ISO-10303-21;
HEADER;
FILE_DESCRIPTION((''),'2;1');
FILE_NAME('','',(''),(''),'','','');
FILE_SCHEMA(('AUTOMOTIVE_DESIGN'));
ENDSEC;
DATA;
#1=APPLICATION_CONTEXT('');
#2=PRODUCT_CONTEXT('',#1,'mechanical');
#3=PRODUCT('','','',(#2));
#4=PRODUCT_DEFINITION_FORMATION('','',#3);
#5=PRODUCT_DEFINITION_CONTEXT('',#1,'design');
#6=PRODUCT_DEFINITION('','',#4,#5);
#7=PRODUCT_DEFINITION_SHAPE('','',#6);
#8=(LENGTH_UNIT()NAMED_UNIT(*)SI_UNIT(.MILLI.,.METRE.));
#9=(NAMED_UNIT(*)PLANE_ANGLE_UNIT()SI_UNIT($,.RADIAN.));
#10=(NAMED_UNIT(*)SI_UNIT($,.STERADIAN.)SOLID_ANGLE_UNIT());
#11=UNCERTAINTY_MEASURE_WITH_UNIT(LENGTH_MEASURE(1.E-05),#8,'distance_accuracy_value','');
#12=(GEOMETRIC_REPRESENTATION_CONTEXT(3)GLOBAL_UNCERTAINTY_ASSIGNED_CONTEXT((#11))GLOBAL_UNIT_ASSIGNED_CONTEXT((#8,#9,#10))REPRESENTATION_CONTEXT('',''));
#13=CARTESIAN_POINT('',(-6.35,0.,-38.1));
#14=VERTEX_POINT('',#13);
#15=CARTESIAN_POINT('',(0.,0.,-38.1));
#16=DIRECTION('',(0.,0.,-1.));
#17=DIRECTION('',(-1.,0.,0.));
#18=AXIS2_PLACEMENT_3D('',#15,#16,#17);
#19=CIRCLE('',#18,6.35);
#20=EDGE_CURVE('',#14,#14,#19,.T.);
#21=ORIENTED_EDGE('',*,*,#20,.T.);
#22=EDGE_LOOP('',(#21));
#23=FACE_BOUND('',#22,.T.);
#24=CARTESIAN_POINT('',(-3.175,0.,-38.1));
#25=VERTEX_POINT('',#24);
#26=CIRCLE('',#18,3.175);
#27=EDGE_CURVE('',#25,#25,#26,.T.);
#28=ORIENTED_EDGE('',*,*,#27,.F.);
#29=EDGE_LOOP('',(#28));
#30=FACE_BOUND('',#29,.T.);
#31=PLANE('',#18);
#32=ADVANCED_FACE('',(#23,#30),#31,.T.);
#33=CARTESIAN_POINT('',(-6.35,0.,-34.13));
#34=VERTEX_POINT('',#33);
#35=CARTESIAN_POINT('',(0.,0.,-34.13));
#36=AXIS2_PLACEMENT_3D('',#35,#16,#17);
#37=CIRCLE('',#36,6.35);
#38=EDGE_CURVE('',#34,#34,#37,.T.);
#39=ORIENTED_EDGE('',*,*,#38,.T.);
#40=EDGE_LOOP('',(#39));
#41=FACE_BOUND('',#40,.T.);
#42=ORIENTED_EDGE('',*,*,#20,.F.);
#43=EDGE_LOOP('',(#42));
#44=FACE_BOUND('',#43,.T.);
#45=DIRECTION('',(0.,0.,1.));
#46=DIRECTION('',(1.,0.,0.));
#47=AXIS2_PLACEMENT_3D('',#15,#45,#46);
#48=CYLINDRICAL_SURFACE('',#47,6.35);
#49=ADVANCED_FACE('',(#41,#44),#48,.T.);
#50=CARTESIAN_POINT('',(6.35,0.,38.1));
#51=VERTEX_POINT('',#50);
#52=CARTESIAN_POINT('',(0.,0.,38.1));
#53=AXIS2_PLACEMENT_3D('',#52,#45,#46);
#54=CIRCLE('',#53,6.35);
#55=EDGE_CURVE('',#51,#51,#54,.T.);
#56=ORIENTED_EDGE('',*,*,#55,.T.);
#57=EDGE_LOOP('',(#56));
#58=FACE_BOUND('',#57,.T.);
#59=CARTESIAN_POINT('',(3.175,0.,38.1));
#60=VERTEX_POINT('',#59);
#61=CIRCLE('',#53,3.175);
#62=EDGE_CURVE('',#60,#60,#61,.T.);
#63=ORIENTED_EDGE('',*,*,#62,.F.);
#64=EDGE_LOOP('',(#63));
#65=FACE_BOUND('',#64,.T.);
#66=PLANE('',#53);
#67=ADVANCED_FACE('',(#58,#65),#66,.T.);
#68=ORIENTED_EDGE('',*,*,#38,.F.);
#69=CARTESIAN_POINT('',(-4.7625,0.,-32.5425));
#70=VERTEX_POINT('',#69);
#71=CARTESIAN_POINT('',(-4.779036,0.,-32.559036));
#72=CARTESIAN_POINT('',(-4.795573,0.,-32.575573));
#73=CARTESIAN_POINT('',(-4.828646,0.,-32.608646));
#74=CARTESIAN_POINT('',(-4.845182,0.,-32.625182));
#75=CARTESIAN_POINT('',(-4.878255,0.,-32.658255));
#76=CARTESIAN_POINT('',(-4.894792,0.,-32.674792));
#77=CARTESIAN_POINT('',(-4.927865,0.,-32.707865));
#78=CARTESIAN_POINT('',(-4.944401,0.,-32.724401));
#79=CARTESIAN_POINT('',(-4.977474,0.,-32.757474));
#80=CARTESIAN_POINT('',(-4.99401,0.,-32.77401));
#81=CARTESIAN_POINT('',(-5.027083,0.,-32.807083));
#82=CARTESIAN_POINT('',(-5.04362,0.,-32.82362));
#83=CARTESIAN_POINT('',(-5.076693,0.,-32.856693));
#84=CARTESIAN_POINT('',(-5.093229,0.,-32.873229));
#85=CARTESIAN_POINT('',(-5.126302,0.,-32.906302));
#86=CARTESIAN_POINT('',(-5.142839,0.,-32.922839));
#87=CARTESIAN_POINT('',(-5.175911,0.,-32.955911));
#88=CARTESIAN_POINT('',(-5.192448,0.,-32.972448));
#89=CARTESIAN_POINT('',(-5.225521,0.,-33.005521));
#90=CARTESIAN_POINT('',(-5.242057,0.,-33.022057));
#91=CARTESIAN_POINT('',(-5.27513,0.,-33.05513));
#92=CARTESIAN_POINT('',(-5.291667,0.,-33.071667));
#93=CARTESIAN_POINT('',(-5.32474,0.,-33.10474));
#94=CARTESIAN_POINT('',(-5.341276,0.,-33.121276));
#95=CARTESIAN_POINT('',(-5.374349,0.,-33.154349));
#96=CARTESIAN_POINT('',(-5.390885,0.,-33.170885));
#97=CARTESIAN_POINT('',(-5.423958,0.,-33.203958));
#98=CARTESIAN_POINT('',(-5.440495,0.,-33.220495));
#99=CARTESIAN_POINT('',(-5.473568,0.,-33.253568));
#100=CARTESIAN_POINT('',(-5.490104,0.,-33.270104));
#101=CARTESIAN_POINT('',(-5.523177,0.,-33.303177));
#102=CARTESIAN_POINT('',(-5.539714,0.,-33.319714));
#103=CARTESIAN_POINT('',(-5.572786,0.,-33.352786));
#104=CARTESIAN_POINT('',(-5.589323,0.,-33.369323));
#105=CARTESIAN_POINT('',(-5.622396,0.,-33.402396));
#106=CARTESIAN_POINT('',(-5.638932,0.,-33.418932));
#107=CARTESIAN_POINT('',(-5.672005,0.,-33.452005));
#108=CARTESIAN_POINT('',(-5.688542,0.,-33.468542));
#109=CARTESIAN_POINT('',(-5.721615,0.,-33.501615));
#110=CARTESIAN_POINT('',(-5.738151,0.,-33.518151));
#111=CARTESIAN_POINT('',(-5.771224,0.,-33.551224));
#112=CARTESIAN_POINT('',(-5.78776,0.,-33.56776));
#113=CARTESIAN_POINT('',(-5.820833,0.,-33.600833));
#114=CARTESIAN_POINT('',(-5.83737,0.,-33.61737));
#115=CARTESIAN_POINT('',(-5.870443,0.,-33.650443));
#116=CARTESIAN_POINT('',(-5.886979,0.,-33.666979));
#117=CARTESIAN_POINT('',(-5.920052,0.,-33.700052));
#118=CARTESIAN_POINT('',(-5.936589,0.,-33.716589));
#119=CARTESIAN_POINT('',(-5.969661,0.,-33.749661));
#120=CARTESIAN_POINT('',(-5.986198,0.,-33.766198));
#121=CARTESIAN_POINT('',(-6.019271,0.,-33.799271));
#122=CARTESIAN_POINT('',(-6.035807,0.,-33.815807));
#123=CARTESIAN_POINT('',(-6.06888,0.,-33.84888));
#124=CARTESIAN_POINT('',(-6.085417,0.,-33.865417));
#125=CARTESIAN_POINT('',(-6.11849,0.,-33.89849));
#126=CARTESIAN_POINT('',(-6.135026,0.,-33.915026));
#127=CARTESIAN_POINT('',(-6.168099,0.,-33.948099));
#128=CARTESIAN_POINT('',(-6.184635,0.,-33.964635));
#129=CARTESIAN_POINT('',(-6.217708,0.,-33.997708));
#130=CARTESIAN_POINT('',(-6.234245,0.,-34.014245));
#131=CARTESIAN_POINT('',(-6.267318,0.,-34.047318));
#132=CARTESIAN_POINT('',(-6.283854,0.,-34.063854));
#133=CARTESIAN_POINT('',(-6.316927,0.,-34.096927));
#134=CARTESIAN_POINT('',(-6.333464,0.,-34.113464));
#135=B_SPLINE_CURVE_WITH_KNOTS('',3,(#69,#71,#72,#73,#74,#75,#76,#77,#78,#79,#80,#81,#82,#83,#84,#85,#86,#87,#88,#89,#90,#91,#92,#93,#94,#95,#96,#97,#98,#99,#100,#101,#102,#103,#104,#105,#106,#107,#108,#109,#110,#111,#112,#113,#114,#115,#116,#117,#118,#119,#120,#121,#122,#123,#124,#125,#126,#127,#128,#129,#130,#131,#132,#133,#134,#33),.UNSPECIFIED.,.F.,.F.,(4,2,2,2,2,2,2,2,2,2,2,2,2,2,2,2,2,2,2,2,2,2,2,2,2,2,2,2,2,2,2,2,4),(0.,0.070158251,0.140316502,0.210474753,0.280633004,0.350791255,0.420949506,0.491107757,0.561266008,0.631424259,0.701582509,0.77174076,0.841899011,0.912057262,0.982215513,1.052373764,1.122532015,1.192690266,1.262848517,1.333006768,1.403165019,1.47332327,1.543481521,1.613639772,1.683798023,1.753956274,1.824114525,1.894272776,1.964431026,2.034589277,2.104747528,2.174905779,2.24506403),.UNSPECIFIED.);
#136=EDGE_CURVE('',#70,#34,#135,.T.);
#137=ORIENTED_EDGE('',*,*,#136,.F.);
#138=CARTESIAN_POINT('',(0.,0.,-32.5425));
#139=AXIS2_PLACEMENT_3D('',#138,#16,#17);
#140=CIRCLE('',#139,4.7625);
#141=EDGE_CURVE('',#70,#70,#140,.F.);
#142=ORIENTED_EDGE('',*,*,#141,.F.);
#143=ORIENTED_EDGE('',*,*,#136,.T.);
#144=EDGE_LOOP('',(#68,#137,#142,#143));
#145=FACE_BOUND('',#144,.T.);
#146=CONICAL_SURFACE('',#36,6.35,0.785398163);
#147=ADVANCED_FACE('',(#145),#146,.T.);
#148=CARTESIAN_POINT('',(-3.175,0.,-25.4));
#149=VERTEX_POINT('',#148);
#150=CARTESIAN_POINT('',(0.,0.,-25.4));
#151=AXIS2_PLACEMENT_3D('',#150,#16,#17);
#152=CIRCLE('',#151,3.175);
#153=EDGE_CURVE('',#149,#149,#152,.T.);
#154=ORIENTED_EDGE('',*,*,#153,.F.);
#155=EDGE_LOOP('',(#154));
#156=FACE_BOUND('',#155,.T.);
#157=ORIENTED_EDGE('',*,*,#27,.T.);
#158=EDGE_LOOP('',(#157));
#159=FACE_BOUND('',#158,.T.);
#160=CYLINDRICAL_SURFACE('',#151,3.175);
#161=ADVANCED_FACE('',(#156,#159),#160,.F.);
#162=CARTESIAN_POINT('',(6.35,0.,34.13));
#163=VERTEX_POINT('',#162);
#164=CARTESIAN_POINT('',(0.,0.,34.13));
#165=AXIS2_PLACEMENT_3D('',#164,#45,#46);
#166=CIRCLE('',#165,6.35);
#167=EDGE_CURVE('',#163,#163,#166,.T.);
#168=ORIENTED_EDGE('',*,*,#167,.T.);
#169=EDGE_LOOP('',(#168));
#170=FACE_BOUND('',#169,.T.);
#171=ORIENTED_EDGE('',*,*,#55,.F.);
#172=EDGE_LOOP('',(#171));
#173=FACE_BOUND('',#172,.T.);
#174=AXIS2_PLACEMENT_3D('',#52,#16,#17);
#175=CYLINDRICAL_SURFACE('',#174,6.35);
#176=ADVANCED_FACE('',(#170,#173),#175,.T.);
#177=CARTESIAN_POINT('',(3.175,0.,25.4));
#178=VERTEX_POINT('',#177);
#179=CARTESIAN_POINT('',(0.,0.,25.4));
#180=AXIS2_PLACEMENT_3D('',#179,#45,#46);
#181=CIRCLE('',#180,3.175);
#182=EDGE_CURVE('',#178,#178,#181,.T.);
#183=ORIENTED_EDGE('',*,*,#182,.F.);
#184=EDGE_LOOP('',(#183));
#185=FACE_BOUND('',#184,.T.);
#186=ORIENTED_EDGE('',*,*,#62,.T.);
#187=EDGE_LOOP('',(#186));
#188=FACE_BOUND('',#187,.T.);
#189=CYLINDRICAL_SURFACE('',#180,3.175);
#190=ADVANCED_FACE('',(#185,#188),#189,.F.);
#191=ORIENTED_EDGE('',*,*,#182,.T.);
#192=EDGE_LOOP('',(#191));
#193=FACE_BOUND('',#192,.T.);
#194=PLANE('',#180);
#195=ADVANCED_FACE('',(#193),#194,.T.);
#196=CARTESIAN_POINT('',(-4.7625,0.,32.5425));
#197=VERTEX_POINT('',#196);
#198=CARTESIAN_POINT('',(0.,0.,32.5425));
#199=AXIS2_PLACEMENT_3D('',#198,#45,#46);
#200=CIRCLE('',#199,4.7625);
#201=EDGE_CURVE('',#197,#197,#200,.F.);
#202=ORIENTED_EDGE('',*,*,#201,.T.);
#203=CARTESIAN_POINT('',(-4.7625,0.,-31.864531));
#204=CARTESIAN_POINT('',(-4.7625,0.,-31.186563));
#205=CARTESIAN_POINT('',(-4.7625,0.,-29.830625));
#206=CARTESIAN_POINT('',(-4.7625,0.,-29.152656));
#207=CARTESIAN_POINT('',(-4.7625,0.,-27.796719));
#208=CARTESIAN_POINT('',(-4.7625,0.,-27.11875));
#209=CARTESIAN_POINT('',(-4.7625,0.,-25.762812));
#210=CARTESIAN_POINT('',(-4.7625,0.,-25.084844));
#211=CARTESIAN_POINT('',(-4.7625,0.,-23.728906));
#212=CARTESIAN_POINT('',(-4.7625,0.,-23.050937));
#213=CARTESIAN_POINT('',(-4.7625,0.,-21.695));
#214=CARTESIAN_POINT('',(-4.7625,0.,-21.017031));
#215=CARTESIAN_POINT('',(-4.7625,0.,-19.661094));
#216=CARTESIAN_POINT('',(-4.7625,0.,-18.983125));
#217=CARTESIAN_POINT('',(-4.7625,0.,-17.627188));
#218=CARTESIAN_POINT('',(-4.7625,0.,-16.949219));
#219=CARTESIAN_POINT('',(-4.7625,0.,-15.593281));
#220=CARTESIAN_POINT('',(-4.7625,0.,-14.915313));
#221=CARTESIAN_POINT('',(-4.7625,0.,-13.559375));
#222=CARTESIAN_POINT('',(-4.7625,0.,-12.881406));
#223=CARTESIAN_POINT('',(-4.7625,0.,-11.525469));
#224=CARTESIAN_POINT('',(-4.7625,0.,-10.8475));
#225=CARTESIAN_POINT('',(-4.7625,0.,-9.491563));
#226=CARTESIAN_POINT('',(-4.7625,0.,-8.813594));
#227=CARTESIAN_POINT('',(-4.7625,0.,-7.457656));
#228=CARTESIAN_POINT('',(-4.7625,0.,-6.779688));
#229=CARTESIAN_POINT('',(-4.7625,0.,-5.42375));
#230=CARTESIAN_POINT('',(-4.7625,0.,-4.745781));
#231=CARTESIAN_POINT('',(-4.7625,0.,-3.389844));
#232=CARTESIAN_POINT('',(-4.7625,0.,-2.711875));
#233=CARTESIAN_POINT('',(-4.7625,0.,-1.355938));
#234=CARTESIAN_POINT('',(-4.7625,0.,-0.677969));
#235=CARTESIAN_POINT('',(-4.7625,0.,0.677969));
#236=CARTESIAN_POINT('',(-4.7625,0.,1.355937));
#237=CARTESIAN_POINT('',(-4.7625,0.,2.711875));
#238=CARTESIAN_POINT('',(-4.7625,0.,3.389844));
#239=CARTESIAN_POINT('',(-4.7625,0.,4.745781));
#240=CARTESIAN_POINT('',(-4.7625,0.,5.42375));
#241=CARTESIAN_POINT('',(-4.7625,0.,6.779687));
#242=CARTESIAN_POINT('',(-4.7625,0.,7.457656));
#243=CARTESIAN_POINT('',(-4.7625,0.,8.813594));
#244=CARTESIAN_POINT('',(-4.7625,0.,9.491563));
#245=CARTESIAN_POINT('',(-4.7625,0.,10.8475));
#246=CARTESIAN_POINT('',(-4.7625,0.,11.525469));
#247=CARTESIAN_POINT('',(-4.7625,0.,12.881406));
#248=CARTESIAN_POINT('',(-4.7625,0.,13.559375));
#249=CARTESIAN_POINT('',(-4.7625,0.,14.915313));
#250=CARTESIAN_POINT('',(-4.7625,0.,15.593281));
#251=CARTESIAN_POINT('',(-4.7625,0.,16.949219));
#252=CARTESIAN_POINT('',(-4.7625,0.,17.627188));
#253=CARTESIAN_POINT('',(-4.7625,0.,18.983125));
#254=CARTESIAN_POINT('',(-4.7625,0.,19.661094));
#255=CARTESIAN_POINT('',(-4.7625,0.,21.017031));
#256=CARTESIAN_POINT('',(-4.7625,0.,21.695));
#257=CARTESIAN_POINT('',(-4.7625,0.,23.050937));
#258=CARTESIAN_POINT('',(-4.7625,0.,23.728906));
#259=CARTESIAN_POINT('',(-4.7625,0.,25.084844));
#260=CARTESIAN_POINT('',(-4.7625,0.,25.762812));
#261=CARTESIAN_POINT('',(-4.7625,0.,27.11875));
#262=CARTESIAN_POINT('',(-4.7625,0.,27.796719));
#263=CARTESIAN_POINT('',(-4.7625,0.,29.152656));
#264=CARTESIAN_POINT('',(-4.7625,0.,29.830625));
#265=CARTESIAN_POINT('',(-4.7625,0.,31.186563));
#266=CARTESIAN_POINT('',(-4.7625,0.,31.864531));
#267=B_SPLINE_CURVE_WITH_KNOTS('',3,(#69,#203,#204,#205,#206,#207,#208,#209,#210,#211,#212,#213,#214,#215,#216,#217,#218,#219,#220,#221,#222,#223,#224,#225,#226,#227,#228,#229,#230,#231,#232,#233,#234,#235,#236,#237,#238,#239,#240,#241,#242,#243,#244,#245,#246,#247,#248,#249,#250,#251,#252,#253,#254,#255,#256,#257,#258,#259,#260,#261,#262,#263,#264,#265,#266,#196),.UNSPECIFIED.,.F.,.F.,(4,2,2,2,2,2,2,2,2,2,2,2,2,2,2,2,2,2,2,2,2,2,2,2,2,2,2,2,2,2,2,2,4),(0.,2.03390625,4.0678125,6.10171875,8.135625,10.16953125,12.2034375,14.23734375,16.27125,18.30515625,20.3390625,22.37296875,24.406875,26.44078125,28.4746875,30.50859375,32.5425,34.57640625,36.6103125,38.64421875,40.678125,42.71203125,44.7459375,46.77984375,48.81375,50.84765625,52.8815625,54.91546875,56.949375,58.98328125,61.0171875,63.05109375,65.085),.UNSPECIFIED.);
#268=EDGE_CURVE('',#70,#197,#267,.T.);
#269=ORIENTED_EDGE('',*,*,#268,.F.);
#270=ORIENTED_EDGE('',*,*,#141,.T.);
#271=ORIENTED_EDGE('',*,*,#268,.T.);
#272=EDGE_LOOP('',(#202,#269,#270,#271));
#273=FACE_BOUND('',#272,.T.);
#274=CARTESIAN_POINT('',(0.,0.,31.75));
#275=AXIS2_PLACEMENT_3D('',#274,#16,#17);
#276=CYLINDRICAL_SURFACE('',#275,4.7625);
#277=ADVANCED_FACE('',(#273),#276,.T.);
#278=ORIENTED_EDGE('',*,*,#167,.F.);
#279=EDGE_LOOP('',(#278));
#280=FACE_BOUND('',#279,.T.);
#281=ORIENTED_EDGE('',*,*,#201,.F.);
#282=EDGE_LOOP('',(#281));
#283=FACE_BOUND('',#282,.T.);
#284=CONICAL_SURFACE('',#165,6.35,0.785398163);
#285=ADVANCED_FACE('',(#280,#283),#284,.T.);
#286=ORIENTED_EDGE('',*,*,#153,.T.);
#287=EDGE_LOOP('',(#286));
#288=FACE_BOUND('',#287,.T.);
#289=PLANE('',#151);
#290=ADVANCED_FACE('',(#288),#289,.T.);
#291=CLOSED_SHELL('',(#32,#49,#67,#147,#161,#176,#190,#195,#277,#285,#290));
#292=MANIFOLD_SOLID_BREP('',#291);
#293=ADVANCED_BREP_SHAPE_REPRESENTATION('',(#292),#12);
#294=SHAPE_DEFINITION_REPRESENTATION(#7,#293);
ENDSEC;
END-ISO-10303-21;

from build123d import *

# Parameters (mm, degrees)
SKETCH1_R           = 4.7625
BOSS_EXTRUDE1_DEPTH = 31.75
SKETCH2_R           = 6.35
BOSS_EXTRUDE2_DEPTH = 6.35
CHAMFER1_SIZE       = 2.38
SKETCH3_R           = 3.175
CUT_EXTRUDE1_DEPTH  = 12.7
BOSS_EXTRUDE3_START = 31.75
SKETCH4_R           = 4.7625
BOSS_EXTRUDE3_DEPTH = 31.75
BOSS_EXTRUDE4_START = 6.35
SKETCH5_R           = 6.35
BOSS_EXTRUDE4_DEPTH = 6.35
CHAMFER2_SIZE       = 2.38
CUT_EXTRUDE2_START  = -12.7
SKETCH6_R           = 3.175
CUT_EXTRUDE2_DEPTH  = 12.7


with BuildPart() as part:
    # Sketch1 → Boss-Extrude1 (new body)
    with BuildSketch(Plane.XY):
        Circle(SKETCH1_R)
    extrude(amount=BOSS_EXTRUDE1_DEPTH)

    # Sketch2 → Boss-Extrude2 (add)
    with BuildSketch(Plane.XY.offset(31.75)):
        Circle(SKETCH2_R)
    extrude(amount=BOSS_EXTRUDE2_DEPTH)

    # Chamfer1
    # the kernel refuses this chamfer: 2.38 mm, written as the material it takes off along each edge
    with BuildSketch(Plane(origin=(0, 0, 31.75), x_dir=(1, 0, 0), z_dir=(0, -1, 0))) as chamfer1_piece_1_section:
        Polygon((6.35, CHAMFER1_SIZE), (6.35 - CHAMFER1_SIZE, 0), (6.35, 0), align=None)
    chamfer1_piece_1 = revolve(axis=Axis((0, 0, 31.75), (0, 0, 1)), mode=Mode.PRIVATE)
    chamfer1_piece_1 = chamfer1_piece_1 - Plane(origin=(0, 0, 33.337286279), x_dir=(1, 0, 0), z_dir=(0, 0, -1)) * Cylinder(4.7625, 26, mode=Mode.PRIVATE)
    add(chamfer1_piece_1, mode=Mode.SUBTRACT)

    # Sketch3 → Cut-Extrude1 (cut)
    with BuildSketch(Plane.XY.offset(38.1)):
        Circle(SKETCH3_R)
    extrude(amount=-CUT_EXTRUDE1_DEPTH, mode=Mode.SUBTRACT)

    # Sketch4 → Boss-Extrude3 (add)
    with BuildSketch(Plane(origin=(0, 0, 0), x_dir=(-1, 0, 0), z_dir=(0, 0, -1)).offset(BOSS_EXTRUDE3_START)):
        Circle(SKETCH4_R)
    extrude(amount=-BOSS_EXTRUDE3_DEPTH)

    # Sketch5 → Boss-Extrude4 (add)
    with BuildSketch(Plane(origin=(0, 0, -31.75), x_dir=(-1, 0, 0), z_dir=(0, 0, -1)).offset(BOSS_EXTRUDE4_START)):
        with Locations(Location((0, 0, 0), (0, 0, 180))):
            Circle(SKETCH5_R)
    extrude(amount=-BOSS_EXTRUDE4_DEPTH)

    # Chamfer2
    # the kernel refuses this chamfer: 2.38 mm, written as the material it takes off along each edge
    with BuildSketch(Plane(origin=(0, 0, -31.75), x_dir=(1, 0, 0), z_dir=(0, 1, 0))) as chamfer2_piece_1_section:
        Polygon((6.35, CHAMFER2_SIZE), (6.35 - CHAMFER2_SIZE, 0), (6.35, 0), align=None)
    chamfer2_piece_1 = revolve(axis=Axis((0, 0, -31.75), (0, 0, -1)), mode=Mode.PRIVATE)
    chamfer2_piece_1 = chamfer2_piece_1 - Plane(origin=(0, 0, -33.337286279), x_dir=(-1, 0, 0), z_dir=(0, 0, -1)) * Cylinder(4.7625, 26, mode=Mode.PRIVATE)
    add(chamfer2_piece_1, mode=Mode.SUBTRACT)

    # Sketch6 → Cut-Extrude2 (cut)
    with BuildSketch(Plane(origin=(0, 0, -38.1), x_dir=(-1, 0, 0), z_dir=(0, 0, -1)).offset(CUT_EXTRUDE2_START)):
        with Locations(Location((0, 0, 0), (0, 0, 180))):
            Circle(SKETCH6_R)
    extrude(amount=CUT_EXTRUDE2_DEPTH, mode=Mode.SUBTRACT)


solid = part.part
